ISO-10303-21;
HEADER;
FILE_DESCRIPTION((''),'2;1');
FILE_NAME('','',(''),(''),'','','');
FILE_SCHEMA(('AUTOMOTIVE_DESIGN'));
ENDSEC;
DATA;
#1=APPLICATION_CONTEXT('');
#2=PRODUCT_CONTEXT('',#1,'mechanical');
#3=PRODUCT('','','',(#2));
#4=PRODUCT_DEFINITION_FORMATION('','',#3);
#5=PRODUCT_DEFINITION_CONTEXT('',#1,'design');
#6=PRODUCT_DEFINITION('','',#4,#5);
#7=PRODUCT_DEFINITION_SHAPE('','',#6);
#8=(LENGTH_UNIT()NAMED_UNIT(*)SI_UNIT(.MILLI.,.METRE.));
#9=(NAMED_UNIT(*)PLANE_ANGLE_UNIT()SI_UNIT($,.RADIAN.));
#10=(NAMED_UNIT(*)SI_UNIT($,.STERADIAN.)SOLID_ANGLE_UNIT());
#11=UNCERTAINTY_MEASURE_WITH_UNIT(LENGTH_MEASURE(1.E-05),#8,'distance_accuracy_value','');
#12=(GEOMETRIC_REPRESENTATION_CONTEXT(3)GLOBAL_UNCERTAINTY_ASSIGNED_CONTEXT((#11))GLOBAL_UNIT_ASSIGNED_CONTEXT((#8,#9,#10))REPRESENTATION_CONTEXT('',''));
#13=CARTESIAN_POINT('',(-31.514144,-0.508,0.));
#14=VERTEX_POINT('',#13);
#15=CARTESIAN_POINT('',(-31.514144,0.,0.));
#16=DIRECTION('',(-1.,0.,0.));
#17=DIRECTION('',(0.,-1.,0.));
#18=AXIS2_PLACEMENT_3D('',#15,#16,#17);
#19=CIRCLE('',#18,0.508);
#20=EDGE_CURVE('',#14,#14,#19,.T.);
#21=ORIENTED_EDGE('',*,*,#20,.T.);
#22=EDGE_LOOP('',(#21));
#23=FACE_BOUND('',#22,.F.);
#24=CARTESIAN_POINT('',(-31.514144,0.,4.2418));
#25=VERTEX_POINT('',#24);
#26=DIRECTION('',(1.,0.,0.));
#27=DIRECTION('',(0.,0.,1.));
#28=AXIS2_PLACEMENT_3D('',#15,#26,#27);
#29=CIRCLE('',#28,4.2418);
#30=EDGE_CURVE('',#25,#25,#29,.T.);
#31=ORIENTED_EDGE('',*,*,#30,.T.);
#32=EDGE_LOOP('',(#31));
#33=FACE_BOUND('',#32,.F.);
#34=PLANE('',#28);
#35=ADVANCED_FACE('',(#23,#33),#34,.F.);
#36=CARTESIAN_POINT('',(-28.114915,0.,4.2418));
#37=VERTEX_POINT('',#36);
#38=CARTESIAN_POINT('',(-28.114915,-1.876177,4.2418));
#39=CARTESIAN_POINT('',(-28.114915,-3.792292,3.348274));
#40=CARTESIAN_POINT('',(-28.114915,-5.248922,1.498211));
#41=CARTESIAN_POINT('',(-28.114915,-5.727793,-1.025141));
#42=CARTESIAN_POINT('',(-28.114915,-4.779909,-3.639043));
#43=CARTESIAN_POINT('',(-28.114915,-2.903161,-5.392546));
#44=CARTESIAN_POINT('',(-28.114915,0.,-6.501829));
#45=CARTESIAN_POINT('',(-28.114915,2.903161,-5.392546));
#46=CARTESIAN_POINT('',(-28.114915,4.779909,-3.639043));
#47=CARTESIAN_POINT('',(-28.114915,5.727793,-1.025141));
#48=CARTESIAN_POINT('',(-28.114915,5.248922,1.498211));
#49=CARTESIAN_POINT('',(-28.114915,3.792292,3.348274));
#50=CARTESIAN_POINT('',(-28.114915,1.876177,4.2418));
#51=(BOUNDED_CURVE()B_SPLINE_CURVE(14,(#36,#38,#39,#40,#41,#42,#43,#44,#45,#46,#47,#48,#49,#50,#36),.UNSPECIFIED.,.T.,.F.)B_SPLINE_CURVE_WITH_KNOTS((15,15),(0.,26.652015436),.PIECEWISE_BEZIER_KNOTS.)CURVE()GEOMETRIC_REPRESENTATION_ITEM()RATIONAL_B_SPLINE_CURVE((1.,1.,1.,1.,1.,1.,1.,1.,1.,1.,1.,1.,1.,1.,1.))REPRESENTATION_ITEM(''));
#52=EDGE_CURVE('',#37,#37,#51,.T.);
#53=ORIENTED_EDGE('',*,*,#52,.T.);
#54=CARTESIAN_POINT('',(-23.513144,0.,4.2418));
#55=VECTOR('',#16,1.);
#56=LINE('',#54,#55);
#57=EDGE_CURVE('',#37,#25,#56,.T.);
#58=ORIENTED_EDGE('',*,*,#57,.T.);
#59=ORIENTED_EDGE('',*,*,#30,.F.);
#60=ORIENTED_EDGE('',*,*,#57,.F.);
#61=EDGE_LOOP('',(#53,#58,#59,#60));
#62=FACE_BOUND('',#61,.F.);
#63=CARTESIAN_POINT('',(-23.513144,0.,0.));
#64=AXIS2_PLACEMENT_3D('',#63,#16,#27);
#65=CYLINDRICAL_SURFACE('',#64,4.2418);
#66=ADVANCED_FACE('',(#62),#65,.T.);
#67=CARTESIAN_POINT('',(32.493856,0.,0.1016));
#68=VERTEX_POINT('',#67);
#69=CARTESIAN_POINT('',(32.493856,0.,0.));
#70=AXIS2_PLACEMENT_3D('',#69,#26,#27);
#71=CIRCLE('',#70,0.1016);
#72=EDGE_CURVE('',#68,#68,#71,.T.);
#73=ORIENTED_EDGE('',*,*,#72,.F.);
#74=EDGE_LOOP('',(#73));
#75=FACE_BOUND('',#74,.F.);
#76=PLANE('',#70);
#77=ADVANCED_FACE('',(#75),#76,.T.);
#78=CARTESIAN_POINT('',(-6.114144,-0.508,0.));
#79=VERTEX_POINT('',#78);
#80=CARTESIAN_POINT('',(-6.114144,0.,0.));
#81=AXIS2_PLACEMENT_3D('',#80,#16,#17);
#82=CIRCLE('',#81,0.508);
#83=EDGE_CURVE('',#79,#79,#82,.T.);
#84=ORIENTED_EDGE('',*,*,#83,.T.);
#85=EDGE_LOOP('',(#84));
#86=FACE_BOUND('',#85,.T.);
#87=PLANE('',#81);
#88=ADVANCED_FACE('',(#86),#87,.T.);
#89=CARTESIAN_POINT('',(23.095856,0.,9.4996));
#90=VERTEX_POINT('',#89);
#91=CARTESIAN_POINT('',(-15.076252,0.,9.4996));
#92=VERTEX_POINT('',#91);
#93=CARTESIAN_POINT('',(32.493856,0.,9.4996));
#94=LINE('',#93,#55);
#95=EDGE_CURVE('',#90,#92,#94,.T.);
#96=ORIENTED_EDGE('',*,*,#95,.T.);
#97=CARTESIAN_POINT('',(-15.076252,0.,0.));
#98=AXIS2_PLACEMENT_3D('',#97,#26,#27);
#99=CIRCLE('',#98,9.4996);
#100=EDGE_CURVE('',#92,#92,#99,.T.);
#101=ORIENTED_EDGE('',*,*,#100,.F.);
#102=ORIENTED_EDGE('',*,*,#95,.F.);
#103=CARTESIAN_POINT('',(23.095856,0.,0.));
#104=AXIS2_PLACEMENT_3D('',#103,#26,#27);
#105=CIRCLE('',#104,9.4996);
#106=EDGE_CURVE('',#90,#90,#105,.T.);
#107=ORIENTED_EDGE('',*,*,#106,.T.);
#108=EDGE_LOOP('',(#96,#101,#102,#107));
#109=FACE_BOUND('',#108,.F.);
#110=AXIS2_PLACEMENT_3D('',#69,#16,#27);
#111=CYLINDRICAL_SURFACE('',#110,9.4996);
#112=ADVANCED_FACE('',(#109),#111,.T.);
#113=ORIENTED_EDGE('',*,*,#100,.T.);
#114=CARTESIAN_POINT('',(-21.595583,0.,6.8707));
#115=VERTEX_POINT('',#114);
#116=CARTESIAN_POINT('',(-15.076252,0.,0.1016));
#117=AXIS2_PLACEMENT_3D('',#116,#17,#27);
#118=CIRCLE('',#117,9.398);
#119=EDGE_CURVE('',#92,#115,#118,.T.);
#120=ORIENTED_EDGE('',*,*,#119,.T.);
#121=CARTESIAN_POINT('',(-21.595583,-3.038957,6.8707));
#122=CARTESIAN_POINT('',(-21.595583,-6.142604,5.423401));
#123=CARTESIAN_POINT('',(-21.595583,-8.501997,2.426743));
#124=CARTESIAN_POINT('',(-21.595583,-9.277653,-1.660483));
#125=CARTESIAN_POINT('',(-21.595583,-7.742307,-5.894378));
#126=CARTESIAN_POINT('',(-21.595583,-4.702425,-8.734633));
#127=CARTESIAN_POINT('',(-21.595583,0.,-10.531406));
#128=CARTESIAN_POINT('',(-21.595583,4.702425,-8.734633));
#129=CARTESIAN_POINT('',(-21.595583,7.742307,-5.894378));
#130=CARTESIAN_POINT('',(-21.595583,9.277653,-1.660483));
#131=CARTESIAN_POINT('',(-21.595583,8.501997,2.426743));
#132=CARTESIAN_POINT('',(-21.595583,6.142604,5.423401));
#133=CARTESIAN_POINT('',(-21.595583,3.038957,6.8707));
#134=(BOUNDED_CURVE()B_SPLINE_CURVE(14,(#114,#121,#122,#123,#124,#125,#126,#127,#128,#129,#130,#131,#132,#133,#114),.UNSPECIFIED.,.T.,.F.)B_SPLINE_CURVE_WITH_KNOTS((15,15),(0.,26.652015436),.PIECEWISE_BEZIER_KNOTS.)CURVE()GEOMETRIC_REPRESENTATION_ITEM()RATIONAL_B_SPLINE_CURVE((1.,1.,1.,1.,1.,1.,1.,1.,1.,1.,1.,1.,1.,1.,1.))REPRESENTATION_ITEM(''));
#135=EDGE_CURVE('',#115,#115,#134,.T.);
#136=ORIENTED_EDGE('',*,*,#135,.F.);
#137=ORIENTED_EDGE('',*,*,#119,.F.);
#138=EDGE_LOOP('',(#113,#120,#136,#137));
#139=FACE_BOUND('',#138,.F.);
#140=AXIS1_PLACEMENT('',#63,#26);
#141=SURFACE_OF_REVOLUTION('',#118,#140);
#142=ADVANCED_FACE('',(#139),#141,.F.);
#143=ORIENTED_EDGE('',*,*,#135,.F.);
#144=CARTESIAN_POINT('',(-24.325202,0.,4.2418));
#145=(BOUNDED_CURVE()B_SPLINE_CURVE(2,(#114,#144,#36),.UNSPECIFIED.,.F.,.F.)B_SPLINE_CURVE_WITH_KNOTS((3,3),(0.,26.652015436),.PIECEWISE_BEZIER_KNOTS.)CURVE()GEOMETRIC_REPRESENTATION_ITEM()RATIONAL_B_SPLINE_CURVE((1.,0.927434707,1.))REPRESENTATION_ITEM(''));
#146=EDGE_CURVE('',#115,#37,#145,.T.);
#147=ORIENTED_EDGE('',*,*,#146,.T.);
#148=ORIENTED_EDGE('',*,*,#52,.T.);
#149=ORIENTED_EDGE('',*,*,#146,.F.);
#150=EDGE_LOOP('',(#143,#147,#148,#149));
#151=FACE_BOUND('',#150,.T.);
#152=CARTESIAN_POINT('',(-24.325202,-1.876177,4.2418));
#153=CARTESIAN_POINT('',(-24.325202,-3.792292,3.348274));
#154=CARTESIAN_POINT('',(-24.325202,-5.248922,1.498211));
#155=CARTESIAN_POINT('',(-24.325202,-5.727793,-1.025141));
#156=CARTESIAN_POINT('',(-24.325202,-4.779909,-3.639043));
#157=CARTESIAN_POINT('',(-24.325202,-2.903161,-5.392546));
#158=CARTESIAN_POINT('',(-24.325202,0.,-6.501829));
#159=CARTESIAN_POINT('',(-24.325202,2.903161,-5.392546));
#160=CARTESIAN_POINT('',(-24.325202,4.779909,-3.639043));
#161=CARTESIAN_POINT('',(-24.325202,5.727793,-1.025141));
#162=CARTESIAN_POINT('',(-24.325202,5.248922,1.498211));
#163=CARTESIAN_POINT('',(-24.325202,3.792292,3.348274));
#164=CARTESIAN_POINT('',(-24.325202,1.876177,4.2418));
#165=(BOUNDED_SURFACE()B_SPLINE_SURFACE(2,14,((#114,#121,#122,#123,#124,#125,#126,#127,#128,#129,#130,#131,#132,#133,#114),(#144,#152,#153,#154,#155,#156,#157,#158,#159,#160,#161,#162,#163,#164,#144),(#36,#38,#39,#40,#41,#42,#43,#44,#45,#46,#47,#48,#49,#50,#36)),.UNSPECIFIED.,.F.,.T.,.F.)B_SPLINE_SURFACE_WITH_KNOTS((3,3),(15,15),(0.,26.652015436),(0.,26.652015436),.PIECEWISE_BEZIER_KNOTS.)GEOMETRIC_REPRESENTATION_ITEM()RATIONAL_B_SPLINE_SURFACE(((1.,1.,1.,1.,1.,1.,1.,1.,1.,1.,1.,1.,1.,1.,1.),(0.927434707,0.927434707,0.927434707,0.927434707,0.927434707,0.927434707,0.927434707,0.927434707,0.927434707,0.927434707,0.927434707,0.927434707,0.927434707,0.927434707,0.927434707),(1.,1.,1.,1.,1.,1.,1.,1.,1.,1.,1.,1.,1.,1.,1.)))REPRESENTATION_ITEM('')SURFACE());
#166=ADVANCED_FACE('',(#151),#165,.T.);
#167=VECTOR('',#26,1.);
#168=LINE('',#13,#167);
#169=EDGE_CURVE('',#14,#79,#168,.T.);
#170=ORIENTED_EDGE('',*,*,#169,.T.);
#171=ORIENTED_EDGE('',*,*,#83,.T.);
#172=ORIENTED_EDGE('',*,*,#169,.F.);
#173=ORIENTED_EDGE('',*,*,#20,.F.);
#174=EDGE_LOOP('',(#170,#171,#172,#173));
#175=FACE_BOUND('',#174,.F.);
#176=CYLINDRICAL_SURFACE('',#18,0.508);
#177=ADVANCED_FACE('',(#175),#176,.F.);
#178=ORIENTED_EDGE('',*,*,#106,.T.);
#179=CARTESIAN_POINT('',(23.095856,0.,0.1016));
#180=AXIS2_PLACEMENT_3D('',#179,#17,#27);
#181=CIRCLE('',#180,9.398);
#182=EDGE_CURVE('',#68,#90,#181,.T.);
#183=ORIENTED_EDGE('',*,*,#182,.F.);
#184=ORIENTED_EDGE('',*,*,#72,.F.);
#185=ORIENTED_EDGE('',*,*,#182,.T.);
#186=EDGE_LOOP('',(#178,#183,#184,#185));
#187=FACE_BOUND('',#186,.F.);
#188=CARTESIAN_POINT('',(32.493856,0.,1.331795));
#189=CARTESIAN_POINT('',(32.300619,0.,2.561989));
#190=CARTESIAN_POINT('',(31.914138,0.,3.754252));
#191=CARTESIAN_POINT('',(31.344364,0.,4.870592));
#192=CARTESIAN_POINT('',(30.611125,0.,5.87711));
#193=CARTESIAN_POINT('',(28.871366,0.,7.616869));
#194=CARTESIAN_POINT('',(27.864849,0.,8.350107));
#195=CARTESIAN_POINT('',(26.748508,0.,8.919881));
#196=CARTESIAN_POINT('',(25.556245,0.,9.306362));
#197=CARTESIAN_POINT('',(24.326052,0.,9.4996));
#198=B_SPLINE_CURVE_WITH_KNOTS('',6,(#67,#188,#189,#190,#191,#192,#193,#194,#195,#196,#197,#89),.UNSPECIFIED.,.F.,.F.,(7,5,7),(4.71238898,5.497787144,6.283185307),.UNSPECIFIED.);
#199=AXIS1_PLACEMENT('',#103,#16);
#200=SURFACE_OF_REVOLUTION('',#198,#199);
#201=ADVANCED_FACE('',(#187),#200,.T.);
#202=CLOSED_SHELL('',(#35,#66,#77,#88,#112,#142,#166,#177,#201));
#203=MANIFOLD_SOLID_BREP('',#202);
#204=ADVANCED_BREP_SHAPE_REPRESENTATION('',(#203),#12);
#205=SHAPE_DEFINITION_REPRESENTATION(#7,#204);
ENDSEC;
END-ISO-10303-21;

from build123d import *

# Parameters (mm, degrees)
F2_R     = 9.398
F4_R     = 9.398
F5_R     = 0.508
F6_DEPTH = 25.4


# Not quite as in the source:
# - a fillet or chamfer that OpenCascade refuses, or shapes differently, is made with other operations: its cross-section is extruded or revolved along the edge and cut away or added


with BuildPart() as f1:
    # F0 (on Front) → F1 (revolve)
    with BuildSketch(Plane.XZ):
        Polygon((-31.5141436086, 0), (0, 0), (32.4938563914, 0), (32.4938563914, 9.4996), (-23.5131436086, 9.4996), (-23.5131436086, 4.2418), (-31.5141436086, 4.2418), align=None)
    revolve(axis=Axis((16.2469281957, 0, 0), (1, 0, 0)))

    # F2
    f2_edges = [f1.edges().sort_by_distance(p)[0] for p in [
        (32.493856, 0, -9.4996),
    ]]
    fillet(f2_edges, radius=F2_R)

    # F3: fillet of radius 9.398 on 1 edges, made by hand

    # F3_s1 → F3_t2 (revolve, cut)
    with BuildSketch(Plane.XZ):
        with BuildLine():
            ThreePointArc((-15.0762515291, 9.4996), (-20.0468050396, 8.0775640044), (-23.5131436086, 4.2418))
            Line((-23.5131436086, 4.2418), (-23.5131436086, 9.4996))
            Line((-23.5131436086, 9.4996), (-15.0762515291, 9.4996))
        make_face()
    revolve(axis=Axis((-23.5131436086, 0, 0), (1, 0, 0)), mode=Mode.SUBTRACT)

    # F4
    f4_edges = [f1.edges().sort_by_distance(p)[0] for p in [
        (-23.513144, 0, -4.2418),
    ]]
    fillet(f4_edges, radius=F4_R)

    # F5 (on face) → F6 (cut)
    with BuildSketch(Plane(origin=(-31.5141436086, 0, 0), x_dir=(0, -1, 0), z_dir=(-1, 0, 0))):
        Circle(F5_R)
    extrude(amount=-F6_DEPTH, mode=Mode.SUBTRACT)


solid = f1.part
